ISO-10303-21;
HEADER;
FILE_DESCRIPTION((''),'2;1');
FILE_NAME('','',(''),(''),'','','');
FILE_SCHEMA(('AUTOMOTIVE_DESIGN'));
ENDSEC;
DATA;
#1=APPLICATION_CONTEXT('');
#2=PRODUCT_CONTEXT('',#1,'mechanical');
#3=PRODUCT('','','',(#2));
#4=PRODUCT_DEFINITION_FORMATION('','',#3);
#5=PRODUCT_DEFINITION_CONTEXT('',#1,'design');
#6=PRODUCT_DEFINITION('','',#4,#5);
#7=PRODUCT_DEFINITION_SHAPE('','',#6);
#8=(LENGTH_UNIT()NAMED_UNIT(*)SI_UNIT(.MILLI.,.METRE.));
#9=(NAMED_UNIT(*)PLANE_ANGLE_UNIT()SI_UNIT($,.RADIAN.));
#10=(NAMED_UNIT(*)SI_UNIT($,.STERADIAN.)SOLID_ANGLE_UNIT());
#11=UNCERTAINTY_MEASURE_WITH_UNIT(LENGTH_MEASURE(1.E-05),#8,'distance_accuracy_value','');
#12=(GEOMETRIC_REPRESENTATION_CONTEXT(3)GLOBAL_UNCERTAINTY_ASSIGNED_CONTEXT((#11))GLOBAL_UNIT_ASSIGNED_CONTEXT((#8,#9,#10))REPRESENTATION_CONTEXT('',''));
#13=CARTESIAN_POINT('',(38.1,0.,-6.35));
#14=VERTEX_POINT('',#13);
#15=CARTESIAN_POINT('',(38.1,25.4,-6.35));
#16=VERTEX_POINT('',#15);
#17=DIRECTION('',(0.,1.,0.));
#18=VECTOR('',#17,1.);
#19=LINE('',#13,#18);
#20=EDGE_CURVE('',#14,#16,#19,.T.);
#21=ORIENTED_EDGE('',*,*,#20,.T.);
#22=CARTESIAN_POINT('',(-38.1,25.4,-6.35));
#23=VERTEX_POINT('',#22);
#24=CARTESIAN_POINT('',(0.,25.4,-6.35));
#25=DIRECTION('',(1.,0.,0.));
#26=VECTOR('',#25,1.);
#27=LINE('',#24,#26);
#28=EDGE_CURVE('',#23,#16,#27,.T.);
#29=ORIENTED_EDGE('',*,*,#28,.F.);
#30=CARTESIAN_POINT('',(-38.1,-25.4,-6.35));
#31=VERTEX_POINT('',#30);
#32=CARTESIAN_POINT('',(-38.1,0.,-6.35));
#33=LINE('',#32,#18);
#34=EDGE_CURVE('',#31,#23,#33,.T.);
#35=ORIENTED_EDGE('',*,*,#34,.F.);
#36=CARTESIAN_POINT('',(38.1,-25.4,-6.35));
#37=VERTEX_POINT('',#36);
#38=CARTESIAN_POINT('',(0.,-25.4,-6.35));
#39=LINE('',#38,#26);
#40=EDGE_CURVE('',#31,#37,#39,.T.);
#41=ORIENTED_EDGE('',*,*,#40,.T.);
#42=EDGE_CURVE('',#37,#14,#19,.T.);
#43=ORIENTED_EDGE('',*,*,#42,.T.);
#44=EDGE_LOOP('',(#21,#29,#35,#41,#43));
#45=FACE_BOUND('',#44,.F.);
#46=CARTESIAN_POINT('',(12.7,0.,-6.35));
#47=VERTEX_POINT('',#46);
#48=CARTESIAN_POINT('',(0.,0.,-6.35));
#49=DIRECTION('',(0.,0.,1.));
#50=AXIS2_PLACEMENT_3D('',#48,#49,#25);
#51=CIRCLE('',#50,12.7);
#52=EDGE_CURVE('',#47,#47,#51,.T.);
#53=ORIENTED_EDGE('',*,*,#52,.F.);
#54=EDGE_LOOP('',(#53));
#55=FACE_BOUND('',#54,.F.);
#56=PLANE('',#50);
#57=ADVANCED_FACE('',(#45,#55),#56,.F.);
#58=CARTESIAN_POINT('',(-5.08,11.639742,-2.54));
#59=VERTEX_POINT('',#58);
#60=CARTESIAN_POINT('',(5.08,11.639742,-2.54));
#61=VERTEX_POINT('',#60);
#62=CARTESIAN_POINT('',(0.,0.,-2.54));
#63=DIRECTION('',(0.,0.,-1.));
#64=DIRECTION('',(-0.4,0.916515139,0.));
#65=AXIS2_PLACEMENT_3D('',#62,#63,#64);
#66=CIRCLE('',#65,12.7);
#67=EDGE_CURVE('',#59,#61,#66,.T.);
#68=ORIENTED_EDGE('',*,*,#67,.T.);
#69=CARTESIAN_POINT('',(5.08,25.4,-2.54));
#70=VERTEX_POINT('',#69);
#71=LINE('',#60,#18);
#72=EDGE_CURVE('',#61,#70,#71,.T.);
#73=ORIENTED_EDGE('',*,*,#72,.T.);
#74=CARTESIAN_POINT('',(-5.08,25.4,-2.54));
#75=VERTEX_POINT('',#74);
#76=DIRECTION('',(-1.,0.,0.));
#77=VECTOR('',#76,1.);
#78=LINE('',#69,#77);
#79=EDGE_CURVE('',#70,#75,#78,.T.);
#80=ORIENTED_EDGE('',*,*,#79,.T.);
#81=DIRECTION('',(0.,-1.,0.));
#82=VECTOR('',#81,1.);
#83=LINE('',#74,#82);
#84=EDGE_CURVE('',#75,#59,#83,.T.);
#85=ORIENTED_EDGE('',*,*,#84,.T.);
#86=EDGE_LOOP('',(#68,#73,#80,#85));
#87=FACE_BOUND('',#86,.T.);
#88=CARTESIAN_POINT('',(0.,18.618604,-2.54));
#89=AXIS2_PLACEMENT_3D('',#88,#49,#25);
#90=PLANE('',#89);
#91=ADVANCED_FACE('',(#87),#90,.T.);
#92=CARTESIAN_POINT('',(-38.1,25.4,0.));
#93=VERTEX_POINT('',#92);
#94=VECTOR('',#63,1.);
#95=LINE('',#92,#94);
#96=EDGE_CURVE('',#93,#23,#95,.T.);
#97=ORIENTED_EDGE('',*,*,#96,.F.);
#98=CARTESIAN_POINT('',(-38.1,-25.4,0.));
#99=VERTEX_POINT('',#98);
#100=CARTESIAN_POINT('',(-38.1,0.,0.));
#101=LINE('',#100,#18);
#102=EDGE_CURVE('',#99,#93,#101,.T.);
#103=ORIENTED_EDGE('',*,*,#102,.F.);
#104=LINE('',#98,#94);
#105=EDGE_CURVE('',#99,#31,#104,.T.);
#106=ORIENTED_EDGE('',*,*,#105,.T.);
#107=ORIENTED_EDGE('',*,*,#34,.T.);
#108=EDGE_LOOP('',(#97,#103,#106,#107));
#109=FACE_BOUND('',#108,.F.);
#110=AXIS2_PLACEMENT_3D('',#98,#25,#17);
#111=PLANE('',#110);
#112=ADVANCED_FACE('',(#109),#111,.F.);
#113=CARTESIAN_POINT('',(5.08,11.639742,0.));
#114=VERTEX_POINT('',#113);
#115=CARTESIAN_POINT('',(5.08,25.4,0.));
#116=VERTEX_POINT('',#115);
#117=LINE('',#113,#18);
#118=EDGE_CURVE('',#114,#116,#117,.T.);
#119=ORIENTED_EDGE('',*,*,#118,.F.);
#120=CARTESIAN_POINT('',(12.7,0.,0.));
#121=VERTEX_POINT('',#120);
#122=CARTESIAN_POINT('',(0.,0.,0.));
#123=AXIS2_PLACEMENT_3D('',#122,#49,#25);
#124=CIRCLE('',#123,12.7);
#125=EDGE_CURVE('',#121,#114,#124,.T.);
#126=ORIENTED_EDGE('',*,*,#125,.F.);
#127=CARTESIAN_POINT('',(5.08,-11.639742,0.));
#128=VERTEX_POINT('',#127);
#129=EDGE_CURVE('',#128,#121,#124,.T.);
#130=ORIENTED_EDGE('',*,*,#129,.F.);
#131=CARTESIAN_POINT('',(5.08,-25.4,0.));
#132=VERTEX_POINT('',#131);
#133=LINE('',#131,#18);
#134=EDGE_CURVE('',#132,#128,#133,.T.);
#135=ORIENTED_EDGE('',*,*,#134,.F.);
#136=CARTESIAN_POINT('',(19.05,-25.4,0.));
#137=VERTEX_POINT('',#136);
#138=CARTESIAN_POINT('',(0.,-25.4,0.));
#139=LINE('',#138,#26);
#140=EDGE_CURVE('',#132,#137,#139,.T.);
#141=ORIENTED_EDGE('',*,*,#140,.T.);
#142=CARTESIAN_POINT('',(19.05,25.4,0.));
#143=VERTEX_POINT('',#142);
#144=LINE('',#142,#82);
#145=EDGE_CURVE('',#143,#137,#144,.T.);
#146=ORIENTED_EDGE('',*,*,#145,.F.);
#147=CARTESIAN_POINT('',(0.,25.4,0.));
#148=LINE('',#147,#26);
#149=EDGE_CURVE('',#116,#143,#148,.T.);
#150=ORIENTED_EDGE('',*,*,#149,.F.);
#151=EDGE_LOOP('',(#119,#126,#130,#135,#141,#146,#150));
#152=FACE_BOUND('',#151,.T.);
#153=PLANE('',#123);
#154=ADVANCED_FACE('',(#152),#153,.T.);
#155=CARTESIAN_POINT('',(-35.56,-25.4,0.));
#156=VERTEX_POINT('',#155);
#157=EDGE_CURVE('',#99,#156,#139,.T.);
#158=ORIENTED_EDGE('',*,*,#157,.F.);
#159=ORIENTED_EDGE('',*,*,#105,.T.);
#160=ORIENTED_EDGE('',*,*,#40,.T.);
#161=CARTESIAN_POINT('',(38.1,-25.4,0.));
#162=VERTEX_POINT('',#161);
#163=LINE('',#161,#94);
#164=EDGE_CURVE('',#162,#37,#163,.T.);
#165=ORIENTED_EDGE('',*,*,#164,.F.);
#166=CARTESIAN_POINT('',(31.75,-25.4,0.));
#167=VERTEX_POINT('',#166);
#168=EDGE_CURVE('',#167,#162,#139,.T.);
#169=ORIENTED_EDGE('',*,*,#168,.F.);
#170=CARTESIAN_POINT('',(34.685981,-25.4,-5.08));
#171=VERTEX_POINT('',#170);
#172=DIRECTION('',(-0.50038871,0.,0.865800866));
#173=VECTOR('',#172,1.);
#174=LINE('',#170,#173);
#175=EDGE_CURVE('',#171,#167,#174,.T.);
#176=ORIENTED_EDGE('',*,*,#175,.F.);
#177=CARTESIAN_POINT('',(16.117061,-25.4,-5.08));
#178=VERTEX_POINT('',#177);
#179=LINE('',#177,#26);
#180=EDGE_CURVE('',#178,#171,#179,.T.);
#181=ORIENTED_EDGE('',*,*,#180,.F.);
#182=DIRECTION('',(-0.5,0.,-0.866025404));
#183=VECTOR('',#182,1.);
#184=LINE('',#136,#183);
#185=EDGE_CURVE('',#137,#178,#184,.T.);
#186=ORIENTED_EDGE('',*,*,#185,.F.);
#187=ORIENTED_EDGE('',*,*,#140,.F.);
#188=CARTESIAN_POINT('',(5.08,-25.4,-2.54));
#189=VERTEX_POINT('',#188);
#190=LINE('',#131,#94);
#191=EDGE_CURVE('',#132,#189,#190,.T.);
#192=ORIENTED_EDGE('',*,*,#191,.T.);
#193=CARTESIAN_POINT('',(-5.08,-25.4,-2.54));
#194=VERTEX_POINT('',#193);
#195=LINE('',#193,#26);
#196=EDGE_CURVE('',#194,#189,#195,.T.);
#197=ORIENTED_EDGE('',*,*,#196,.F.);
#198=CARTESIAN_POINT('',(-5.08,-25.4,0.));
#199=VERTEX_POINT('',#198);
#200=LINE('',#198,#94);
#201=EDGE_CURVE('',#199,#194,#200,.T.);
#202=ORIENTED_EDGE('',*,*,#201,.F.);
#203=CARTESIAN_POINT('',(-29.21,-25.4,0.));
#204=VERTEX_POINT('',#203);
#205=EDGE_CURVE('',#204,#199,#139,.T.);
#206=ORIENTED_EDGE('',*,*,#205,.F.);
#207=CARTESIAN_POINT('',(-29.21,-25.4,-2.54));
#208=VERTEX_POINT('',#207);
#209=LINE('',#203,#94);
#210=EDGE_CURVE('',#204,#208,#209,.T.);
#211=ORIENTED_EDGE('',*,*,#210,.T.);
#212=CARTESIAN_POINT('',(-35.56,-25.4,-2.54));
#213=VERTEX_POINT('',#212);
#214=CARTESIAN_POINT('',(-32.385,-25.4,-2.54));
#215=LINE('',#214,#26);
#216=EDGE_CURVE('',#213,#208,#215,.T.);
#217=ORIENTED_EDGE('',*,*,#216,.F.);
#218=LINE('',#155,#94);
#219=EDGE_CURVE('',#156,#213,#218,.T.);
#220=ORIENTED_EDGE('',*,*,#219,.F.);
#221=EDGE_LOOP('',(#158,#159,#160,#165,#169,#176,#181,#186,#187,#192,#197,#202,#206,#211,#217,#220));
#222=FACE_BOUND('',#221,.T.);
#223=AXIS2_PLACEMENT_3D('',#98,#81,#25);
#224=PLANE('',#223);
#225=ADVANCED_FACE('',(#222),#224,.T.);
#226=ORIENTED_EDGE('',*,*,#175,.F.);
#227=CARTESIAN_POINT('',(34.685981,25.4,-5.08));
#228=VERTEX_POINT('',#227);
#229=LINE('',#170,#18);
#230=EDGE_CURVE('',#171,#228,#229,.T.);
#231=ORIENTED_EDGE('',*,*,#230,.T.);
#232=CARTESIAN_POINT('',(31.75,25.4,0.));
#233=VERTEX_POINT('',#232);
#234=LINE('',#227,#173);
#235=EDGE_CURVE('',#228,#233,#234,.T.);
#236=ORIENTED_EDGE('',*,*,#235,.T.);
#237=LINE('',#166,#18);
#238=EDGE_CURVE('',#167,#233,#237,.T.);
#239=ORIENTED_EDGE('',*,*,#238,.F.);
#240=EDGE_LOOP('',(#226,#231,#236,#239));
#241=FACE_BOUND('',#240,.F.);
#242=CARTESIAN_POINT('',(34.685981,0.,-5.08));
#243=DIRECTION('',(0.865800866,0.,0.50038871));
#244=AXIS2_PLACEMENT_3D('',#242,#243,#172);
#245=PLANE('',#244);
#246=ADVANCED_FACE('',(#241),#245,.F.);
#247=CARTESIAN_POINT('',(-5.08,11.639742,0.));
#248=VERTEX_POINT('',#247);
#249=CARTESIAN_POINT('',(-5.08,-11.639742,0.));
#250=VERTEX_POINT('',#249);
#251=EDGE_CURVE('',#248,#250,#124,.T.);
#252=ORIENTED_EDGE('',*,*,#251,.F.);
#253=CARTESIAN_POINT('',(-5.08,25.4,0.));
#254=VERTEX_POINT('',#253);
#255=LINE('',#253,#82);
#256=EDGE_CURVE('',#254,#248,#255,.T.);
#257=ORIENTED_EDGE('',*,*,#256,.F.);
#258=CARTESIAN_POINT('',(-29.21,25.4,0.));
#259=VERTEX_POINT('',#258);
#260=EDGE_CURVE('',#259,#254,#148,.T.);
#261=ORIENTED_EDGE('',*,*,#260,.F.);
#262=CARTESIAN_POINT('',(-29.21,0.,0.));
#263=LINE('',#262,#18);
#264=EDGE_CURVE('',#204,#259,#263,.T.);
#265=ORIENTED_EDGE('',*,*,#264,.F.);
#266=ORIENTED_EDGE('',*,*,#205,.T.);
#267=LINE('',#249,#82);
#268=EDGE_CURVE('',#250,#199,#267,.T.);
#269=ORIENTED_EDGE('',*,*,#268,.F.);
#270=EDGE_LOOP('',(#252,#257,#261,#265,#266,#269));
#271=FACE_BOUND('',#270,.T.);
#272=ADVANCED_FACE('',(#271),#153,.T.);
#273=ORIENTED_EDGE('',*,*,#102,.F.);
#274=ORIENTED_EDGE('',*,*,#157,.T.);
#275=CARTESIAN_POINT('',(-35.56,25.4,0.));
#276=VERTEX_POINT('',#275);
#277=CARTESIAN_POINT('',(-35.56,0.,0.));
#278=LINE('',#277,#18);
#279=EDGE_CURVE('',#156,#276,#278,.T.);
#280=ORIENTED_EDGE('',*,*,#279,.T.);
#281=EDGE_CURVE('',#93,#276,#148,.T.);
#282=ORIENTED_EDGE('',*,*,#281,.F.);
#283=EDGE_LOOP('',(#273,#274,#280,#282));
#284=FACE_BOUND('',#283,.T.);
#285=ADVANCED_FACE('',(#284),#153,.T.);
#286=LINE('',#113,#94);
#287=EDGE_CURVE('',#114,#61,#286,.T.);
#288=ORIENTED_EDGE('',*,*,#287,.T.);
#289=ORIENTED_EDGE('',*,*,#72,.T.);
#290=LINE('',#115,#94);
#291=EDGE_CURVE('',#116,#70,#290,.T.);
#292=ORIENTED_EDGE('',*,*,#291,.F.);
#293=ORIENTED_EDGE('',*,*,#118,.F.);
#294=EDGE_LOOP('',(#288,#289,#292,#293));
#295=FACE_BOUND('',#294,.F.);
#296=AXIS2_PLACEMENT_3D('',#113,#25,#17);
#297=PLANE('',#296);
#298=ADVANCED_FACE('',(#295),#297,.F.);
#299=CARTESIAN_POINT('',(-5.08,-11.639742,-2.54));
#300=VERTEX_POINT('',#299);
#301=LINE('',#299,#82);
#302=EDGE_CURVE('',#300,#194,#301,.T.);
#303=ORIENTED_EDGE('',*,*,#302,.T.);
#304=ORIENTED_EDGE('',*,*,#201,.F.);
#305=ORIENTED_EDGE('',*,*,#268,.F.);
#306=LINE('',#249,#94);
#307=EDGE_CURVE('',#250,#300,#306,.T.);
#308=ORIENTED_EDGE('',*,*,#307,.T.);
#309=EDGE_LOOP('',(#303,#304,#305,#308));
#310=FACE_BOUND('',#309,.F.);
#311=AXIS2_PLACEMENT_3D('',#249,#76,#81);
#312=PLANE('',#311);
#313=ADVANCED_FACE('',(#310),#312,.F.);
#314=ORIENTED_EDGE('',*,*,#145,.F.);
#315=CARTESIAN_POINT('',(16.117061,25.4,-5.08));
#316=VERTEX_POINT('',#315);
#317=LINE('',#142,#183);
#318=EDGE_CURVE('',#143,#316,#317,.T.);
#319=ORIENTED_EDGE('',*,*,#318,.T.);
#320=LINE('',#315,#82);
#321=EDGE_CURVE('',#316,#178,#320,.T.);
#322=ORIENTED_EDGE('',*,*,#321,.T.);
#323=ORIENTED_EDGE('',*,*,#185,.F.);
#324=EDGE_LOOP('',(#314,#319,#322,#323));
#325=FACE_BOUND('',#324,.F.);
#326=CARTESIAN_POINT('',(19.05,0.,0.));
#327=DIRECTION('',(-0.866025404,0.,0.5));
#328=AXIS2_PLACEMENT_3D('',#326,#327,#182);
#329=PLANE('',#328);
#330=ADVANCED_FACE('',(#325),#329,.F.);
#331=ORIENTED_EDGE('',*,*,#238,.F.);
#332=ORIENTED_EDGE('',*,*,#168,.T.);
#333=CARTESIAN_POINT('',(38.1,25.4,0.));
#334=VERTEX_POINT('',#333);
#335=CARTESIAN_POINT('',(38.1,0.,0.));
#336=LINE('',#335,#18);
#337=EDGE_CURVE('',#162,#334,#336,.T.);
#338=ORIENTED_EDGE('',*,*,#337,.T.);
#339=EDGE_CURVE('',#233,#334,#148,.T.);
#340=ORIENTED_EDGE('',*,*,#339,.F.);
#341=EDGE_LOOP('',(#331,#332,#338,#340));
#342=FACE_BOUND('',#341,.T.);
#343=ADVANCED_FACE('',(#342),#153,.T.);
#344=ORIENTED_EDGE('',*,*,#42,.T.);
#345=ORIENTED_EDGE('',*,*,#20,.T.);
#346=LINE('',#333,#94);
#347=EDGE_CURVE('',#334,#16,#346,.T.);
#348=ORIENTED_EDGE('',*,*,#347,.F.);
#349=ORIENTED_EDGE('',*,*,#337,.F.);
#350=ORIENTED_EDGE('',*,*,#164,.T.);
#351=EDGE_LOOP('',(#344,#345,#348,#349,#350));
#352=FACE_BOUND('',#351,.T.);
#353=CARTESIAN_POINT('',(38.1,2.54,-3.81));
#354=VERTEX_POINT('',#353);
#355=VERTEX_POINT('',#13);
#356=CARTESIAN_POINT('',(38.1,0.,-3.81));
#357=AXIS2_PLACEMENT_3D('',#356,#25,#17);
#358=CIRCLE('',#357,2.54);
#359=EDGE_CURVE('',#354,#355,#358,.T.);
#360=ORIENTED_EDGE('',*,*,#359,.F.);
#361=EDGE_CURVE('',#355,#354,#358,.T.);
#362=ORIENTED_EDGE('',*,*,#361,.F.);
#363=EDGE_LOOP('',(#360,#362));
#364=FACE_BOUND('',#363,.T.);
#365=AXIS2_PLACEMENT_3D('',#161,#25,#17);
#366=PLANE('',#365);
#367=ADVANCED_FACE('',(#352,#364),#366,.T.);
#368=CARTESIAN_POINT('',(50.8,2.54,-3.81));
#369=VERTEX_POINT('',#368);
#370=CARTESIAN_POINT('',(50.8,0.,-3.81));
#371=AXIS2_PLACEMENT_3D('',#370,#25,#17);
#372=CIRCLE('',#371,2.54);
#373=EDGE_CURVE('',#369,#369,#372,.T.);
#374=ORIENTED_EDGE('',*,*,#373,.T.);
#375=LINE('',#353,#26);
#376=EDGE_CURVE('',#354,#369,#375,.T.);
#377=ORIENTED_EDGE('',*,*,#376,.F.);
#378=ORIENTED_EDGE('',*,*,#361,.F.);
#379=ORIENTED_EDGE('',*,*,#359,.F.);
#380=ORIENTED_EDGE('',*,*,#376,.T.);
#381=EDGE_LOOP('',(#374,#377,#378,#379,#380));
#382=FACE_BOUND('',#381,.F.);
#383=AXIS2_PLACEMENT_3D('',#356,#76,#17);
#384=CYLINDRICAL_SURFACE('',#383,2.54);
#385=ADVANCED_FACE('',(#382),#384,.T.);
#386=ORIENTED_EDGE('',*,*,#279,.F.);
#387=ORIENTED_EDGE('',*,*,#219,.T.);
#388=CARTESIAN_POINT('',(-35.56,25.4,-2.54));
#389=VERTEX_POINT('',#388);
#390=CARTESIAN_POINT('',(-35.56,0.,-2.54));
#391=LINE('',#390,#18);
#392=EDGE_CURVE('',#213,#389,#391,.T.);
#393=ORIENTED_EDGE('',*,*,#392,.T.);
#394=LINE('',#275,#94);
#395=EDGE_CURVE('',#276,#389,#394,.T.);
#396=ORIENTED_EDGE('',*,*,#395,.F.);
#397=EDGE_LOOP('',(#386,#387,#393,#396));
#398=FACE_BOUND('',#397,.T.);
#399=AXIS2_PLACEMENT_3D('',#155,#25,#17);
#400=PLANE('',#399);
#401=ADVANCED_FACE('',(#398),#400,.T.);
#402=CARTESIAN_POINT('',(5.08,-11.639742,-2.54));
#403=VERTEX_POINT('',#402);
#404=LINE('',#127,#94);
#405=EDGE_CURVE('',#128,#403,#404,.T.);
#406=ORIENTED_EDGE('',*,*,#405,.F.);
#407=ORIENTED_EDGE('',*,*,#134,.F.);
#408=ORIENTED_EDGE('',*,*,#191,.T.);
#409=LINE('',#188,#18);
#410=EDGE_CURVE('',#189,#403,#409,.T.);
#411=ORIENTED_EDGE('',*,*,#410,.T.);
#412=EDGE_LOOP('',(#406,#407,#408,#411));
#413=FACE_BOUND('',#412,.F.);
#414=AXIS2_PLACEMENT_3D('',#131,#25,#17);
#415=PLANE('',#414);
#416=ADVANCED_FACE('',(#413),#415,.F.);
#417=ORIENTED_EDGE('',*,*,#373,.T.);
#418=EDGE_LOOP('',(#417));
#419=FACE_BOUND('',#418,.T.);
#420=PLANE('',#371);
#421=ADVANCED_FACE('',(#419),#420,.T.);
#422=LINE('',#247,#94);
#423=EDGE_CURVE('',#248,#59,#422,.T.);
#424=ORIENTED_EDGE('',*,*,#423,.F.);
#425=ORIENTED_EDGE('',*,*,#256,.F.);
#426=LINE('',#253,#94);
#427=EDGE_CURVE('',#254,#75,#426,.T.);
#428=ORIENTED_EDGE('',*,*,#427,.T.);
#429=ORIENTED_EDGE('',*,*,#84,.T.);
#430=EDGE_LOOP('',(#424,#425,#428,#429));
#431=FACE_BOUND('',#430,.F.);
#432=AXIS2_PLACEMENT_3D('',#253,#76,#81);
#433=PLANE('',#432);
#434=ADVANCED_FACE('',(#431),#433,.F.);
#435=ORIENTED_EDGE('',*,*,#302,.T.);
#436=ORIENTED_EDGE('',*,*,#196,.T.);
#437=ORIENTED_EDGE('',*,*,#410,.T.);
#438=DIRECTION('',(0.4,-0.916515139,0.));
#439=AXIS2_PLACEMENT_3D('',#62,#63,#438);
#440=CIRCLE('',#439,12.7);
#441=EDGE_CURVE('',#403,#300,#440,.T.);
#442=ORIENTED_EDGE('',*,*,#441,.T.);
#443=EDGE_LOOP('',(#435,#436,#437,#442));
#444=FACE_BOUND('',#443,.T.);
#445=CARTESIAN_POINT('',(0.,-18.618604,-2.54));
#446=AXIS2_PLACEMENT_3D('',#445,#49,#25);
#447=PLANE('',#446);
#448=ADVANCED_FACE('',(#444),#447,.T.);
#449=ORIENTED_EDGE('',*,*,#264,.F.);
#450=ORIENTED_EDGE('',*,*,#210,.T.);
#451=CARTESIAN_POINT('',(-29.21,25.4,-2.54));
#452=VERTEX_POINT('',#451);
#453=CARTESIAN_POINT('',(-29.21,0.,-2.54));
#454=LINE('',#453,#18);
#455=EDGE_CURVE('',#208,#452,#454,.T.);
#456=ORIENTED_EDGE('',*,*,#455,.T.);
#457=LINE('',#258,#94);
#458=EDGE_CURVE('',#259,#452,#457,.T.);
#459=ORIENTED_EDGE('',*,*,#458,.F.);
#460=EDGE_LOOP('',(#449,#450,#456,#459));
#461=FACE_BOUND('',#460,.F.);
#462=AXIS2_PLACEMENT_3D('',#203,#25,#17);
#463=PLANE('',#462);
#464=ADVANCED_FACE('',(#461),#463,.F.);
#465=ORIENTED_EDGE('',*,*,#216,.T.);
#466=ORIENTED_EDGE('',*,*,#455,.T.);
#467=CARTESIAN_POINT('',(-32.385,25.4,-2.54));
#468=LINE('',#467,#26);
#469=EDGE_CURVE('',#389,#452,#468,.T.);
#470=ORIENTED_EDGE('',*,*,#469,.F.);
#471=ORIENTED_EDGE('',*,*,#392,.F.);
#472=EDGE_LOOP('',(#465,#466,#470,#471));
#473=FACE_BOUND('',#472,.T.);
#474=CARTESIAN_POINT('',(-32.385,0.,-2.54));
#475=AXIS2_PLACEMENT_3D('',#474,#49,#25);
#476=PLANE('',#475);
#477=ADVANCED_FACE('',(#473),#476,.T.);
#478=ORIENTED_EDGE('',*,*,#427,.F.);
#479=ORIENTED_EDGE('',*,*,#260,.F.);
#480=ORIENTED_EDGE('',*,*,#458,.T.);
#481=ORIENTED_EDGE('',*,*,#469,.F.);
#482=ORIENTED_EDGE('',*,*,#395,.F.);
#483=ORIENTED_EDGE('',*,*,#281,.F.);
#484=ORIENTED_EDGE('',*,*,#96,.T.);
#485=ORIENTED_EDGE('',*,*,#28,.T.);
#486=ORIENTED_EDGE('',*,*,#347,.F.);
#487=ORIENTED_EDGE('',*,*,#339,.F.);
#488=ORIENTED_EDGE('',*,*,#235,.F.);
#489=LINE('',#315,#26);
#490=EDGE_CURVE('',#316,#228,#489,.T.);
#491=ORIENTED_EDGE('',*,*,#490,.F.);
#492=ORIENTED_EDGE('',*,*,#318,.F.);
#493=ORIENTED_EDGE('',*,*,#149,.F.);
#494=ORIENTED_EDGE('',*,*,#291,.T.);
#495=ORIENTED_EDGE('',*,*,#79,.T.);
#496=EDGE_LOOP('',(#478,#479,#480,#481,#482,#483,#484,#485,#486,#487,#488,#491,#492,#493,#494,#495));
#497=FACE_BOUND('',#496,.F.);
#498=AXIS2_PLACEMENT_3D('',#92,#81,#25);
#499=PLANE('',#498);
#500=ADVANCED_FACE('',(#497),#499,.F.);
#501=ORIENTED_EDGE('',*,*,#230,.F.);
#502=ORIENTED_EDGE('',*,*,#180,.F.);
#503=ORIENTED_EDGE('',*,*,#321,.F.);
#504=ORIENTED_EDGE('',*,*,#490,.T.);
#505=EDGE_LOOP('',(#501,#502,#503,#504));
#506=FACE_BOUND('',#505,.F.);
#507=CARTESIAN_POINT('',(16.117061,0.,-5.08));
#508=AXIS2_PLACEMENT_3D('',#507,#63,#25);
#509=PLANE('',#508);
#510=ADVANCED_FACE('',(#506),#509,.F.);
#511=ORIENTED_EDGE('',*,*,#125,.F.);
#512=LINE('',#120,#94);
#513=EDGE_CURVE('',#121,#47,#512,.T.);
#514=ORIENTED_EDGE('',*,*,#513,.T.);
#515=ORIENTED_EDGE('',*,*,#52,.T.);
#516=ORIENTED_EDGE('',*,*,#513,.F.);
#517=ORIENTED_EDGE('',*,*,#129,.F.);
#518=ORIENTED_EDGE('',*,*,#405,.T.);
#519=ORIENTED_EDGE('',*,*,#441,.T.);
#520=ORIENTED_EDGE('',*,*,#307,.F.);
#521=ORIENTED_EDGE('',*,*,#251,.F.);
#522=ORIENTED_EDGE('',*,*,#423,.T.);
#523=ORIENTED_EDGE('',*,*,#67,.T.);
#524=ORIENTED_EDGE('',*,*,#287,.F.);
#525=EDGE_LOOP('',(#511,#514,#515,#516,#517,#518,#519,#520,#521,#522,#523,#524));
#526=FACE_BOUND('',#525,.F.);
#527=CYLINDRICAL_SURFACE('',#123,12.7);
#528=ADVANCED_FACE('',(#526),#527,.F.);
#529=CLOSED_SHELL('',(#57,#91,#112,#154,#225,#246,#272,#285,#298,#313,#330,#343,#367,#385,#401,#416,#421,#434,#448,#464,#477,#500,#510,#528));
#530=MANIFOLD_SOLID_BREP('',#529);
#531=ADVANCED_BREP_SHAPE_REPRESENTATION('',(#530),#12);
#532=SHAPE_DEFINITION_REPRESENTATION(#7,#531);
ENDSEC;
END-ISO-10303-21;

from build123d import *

# Parameters (mm, degrees)
F0_W     = 76.2
F0_H     = 50.8
F0_R     = 12.7
F1_DEPTH = 6.35
F2_W     = 6.35
F2_H     = 50.8
F3_DEPTH = 2.54
F5_DEPTH = 25.4
F6_R     = 2.54
F7_DEPTH = 12.7


# Not quite as in the source:
# - a feature names something its author has since deleted; it is built from what else it names


with BuildPart() as f1:
    # F0 (on Top) → F1 (new body)
    with BuildSketch(Plane.XY):
        Rectangle(F0_W, F0_H)
        Circle(F0_R, mode=Mode.SUBTRACT)
    extrude(amount=-F1_DEPTH)

    # F2 (on face) → F3 (cut)
    with BuildSketch(Plane.XY):
        with Locations((-32.385, 0)):
            Rectangle(F2_W, F2_H)
        with BuildLine():
            Line((-5.08, -11.6397422652), (-5.08, -25.4))
            Line((-5.08, -25.4), (5.08, -25.4))
            Line((5.08, -25.4), (5.08, -11.6397422652))
            ThreePointArc((5.08, -11.6397422652), (0, -12.7), (-5.08, -11.6397422652))
        make_face()
        with BuildLine():
            Line((5.08, 25.4), (-5.08, 25.4))
            Line((-5.08, 25.4), (-5.08, 11.6397422652))
            ThreePointArc((-5.08, 11.6397422652), (0, 12.7), (5.08, 11.6397422652))
            Line((5.08, 11.6397422652), (5.08, 25.4))
        make_face()
    extrude(amount=-F3_DEPTH, mode=Mode.SUBTRACT)

    # F4 (on Front) → F5 (cut, symmetric)
    with BuildSketch(Plane.XZ):
        Polygon((31.75, 0), (19.05, 0), (16.1170606325, -5.08), (34.6859807152, -5.08), align=None)
    extrude(amount=F5_DEPTH, both=True, mode=Mode.SUBTRACT)

    # F6 (on face) → F7 (join)
    with BuildSketch(Plane.YZ.offset(38.1)):
        with Locations((0, -3.81)):
            Circle(F6_R)
    extrude(amount=F7_DEPTH)


solid = f1.part
